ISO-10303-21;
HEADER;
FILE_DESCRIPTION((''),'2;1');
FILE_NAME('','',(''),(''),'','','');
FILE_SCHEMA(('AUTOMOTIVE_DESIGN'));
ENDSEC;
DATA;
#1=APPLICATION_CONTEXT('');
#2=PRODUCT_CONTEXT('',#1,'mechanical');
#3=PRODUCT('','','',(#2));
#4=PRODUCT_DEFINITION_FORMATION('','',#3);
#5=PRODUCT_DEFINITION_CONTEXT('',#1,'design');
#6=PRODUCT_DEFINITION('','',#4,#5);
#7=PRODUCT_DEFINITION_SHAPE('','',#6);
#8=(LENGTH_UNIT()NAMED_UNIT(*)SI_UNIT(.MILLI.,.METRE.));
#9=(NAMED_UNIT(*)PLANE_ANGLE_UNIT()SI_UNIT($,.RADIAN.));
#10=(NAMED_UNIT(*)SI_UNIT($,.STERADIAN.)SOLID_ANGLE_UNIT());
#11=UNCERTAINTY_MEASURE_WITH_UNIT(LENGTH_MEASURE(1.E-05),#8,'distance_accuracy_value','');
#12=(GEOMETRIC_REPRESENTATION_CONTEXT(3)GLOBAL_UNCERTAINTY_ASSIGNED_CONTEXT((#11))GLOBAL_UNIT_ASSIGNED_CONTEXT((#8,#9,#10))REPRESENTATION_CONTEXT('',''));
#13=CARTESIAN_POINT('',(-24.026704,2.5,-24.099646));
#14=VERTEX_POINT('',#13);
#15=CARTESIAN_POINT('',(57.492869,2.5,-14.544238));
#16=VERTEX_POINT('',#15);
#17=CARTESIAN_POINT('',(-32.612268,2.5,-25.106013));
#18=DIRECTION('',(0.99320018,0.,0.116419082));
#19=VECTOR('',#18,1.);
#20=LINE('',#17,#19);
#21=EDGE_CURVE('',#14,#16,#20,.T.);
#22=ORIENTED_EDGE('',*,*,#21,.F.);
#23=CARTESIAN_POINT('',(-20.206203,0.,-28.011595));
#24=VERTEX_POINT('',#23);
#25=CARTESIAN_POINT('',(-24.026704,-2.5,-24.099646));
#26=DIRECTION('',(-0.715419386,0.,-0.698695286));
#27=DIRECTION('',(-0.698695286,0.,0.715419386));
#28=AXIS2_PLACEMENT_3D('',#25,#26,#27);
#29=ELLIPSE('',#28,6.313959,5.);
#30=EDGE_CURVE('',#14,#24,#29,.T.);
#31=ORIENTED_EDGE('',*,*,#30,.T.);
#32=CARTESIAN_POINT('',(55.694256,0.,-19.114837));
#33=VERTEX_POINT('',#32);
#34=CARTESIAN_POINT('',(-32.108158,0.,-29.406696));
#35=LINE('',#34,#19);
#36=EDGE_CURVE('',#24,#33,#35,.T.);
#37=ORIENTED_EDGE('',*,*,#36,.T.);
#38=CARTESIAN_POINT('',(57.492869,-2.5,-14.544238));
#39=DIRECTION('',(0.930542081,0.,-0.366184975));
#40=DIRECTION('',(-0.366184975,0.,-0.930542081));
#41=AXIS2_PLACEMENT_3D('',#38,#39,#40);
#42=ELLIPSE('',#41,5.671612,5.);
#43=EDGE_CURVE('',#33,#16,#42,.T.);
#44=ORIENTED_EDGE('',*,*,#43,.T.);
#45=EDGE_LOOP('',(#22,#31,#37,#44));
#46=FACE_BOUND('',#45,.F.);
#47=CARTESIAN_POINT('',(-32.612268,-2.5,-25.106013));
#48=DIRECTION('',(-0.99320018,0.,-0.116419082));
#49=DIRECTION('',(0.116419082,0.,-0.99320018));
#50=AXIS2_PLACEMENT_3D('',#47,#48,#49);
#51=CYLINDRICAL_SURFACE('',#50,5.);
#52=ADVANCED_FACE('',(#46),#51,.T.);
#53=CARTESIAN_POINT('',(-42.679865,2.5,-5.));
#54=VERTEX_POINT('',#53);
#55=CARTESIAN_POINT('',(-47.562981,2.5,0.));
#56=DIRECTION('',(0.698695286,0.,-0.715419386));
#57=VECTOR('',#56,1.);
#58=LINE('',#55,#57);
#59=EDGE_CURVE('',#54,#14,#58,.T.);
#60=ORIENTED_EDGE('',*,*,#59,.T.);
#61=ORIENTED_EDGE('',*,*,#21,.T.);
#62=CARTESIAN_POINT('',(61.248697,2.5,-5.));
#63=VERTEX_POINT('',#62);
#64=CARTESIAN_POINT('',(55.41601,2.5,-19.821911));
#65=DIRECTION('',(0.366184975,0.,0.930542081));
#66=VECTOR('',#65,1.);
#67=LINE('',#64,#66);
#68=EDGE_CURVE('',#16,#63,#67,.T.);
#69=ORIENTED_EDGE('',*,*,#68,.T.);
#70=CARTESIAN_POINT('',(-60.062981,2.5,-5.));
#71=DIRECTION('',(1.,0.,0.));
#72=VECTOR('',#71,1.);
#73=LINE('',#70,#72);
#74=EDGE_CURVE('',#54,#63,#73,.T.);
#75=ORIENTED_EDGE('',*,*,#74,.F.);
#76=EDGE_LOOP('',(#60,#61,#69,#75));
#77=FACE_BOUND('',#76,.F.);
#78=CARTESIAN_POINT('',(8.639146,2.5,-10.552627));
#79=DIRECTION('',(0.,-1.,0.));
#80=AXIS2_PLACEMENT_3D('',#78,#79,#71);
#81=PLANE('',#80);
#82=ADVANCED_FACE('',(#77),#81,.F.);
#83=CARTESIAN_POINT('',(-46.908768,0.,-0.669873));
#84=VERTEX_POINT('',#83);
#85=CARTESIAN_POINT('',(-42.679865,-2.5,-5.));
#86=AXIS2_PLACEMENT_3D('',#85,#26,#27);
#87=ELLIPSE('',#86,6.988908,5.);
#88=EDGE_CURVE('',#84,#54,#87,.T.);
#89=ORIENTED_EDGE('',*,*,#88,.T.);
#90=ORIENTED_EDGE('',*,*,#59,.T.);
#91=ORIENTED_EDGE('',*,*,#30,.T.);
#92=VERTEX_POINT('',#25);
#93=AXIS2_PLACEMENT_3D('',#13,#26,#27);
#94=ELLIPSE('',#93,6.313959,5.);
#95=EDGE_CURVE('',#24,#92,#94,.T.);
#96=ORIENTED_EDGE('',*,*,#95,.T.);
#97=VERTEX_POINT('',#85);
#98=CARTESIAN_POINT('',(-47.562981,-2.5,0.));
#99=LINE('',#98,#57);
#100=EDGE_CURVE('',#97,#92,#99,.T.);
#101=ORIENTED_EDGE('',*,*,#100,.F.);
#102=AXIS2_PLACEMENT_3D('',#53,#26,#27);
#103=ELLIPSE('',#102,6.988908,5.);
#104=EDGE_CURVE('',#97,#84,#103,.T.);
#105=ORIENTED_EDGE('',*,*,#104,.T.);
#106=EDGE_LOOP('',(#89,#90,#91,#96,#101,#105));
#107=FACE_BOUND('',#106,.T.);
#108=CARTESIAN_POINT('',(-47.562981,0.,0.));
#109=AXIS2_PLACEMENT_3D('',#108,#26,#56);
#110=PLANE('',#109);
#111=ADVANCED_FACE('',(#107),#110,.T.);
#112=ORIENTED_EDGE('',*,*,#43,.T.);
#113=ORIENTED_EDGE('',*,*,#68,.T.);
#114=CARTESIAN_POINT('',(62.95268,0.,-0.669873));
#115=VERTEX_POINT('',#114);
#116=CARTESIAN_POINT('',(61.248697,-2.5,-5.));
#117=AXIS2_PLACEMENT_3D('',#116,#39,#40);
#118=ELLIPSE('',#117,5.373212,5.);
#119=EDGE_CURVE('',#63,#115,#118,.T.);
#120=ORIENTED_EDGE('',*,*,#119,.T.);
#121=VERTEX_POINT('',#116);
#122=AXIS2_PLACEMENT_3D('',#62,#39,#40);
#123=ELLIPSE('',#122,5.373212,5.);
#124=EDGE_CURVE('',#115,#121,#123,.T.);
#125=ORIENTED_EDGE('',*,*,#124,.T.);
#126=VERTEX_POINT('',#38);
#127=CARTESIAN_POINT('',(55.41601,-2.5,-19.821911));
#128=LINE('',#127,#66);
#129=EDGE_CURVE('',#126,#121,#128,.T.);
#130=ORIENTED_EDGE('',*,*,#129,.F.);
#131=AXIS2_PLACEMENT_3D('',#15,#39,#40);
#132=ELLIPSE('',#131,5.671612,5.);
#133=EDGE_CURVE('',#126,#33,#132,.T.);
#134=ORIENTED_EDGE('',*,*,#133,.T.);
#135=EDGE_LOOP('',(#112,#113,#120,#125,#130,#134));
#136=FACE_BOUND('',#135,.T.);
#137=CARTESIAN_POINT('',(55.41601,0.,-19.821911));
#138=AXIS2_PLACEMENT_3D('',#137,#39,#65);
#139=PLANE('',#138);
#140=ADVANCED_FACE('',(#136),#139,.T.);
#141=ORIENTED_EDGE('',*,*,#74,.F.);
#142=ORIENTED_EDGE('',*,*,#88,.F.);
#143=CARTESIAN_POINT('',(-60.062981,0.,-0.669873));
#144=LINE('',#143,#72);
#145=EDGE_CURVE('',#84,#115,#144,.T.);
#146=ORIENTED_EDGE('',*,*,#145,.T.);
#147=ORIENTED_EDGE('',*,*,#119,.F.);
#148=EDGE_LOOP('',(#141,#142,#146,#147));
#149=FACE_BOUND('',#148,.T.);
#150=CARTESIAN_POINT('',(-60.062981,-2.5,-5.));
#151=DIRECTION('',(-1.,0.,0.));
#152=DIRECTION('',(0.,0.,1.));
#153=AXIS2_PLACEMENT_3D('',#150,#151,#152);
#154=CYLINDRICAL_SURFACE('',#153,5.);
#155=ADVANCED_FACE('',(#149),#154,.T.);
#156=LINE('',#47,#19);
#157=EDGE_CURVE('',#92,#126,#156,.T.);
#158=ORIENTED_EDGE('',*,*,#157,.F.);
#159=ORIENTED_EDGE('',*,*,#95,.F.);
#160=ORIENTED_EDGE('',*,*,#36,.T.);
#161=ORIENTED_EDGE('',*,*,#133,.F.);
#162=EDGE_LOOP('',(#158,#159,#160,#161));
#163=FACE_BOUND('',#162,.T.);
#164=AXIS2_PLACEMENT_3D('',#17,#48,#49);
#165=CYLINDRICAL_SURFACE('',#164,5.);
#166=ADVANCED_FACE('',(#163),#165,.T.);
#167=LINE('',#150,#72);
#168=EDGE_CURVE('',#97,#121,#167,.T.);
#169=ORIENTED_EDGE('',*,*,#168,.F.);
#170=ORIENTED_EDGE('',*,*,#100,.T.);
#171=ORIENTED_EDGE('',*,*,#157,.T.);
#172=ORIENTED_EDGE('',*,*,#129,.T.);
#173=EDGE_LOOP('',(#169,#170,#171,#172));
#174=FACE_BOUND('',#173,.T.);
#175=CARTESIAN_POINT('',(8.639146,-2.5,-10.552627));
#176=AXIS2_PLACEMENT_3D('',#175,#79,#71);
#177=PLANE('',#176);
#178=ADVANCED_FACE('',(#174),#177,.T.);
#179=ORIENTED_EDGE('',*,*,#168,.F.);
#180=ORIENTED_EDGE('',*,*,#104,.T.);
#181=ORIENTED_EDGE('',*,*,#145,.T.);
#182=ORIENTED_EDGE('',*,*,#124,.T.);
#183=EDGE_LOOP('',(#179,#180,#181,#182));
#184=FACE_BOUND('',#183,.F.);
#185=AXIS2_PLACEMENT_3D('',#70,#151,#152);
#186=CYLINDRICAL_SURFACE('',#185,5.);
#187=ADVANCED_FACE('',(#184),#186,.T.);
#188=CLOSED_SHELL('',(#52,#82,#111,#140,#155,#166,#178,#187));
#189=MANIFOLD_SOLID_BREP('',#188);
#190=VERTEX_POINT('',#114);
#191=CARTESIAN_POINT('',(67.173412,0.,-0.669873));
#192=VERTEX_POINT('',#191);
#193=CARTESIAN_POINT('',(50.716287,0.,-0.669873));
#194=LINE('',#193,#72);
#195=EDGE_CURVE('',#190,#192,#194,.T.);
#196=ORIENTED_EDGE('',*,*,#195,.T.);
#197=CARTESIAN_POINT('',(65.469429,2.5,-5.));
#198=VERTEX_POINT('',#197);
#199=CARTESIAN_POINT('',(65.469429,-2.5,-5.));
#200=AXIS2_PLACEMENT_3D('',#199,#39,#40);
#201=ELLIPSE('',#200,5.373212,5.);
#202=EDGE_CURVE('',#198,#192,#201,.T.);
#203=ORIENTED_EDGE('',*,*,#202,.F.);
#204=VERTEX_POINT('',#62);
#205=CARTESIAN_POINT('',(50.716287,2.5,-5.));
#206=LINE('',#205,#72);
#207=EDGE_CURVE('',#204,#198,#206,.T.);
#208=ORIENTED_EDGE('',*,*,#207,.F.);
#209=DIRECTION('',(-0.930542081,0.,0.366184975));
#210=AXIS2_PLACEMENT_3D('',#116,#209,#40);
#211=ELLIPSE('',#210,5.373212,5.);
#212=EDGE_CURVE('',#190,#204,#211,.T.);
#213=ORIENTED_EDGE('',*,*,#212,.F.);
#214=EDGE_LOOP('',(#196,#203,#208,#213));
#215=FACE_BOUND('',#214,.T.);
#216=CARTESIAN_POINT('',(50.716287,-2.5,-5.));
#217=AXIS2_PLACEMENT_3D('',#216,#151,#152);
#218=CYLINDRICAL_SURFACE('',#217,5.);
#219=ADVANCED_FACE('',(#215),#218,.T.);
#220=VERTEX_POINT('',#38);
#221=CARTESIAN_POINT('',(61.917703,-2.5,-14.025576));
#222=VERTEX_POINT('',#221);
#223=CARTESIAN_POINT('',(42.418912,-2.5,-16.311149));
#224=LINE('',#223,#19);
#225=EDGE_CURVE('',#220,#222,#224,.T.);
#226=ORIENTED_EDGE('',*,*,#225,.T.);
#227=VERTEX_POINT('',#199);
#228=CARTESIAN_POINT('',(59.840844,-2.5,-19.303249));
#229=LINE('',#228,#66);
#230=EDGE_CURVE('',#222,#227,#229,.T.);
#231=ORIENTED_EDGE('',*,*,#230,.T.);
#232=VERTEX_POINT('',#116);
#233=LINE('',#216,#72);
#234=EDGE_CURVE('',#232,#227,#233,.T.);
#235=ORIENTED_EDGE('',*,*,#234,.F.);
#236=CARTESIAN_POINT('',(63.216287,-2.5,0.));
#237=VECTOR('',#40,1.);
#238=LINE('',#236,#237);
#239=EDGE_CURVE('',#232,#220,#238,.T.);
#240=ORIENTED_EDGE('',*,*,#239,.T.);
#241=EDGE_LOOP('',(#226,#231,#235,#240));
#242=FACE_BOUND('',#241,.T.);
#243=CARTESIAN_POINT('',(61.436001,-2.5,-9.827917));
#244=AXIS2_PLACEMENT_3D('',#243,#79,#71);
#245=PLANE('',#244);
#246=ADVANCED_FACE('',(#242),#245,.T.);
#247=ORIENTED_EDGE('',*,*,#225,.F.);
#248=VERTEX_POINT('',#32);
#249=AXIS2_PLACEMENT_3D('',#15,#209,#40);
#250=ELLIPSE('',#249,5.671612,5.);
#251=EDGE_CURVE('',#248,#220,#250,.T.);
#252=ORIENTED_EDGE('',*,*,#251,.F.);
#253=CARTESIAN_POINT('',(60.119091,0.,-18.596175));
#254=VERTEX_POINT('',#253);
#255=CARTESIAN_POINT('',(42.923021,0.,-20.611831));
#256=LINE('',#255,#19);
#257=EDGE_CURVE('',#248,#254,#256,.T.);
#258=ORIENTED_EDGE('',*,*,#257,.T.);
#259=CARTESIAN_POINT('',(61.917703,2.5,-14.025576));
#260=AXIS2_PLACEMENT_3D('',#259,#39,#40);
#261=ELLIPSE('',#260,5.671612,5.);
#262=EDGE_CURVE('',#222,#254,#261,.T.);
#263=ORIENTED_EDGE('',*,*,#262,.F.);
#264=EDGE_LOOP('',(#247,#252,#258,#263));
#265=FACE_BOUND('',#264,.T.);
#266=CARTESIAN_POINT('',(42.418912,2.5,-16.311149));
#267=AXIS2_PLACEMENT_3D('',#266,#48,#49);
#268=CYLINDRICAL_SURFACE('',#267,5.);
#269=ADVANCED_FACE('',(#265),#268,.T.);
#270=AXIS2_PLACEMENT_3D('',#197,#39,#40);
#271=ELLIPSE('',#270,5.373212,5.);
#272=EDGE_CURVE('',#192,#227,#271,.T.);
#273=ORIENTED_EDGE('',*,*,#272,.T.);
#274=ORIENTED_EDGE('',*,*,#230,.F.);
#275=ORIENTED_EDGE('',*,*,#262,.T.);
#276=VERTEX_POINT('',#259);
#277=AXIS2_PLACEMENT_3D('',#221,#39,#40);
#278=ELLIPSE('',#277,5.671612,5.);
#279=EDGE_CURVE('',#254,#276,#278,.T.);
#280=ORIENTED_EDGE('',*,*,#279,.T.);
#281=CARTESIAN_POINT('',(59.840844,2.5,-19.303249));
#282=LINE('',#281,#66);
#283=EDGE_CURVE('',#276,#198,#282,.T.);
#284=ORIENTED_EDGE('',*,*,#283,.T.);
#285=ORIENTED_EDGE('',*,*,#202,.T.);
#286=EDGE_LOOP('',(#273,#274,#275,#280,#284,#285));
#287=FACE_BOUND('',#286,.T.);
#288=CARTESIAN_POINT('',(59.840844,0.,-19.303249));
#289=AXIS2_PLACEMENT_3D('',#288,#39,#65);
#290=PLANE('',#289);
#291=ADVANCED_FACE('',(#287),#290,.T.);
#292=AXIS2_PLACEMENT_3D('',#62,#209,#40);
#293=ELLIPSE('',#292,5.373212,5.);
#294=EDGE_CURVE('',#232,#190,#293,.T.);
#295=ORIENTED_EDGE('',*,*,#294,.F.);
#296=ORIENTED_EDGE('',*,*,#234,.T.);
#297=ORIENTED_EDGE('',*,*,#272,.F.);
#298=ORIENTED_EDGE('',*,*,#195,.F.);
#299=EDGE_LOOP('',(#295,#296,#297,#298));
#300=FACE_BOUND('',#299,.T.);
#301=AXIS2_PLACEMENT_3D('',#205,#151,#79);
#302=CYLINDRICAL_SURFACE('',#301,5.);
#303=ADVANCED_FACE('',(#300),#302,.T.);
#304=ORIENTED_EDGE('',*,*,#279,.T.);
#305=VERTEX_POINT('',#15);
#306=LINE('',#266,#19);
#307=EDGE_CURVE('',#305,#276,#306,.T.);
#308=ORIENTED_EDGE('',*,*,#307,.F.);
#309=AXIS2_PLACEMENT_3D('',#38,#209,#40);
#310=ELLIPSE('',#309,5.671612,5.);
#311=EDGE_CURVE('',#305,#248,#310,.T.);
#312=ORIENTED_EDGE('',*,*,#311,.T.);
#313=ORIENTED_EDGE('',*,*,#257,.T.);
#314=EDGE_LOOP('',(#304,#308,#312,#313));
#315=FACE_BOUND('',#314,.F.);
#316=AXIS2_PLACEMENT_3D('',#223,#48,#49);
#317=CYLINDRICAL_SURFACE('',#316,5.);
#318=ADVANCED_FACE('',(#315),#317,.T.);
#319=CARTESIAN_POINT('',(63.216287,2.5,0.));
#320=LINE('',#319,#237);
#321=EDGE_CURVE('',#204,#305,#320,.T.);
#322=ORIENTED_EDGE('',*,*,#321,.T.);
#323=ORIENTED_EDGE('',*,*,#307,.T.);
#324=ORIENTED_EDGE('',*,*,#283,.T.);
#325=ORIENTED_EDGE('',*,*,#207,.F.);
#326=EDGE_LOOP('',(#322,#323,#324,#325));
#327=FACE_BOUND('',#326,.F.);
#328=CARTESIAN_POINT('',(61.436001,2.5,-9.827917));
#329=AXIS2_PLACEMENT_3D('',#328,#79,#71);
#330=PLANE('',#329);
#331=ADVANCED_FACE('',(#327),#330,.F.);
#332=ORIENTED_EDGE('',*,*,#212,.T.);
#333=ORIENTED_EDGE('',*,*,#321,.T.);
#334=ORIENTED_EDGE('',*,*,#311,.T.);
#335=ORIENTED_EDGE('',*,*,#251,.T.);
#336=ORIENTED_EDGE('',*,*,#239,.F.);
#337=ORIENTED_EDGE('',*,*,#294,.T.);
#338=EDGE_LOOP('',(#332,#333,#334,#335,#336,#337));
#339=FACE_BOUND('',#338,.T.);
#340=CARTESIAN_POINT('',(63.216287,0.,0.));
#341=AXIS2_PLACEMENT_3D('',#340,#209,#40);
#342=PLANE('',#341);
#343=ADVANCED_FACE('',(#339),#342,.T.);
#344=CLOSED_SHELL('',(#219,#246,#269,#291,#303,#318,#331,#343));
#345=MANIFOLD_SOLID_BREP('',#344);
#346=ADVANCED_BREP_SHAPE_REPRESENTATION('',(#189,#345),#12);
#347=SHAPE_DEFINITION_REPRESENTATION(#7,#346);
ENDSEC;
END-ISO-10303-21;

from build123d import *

# Parameters (mm, degrees)
F1_DEPTH    = 2.5
F2_T1_DEPTH = 135.7792679391
F2_T3_DEPTH = 100.5448710702
F3_DEPTH    = 2.5
F4_T1_DEPTH = 29.2207320609
F4_T3_DEPTH = 29.4551289298


# Not quite as in the source:
# - a fillet or chamfer that OpenCascade refuses, or shapes differently, is made with other operations: its cross-section is extruded or revolved along the edge and cut away or added


with BuildPart() as f1:
    # F0 (on Front) → F1 (new body, symmetric)
    with BuildSketch(Plane.XZ):
        Polygon((63.2162865844, 0), (-47.5629813547, 0), (-19.6151699151, -28.6167754252), (55.4160096247, -19.8219109079), align=None)
    extrude(amount=F1_DEPTH, both=True)

    # F2: fillet of radius 5 on 4 edges, made by hand

    # F2_s2 → F2_t1 (cut)
    with BuildSketch(Plane.YZ.offset(-60.0629813547)):
        with BuildLine():
            ThreePointArc((2.5, 0), (-1.0355339059, -1.4644660941), (-2.5, -5))
            Line((-2.5, -5), (-2.5, 0))
            Line((-2.5, 0), (2.5, 0))
        make_face()
        with BuildLine():
            ThreePointArc((-2.5, 0), (1.0355339059, -1.4644660941), (2.5, -5))
            Line((2.5, -5), (2.5, 0))
            Line((2.5, 0), (-2.5, 0))
        make_face()
    extrude(amount=F2_T1_DEPTH, mode=Mode.SUBTRACT)

    # F2_s4 → F2_t3 (cut)
    with BuildSketch(Plane(origin=(-35.073204722, 0, -4.1111453346), x_dir=(0, 1, 0), z_dir=(0.9932001799, 0, 0.1164190817))):
        with BuildLine():
            ThreePointArc((2.5, -26.1386064324), (-1.0355339059, -24.6741403384), (-2.5, -21.1386064324))
            Line((-2.5, -21.1386064324), (-2.5, -26.1386064324))
            Line((-2.5, -26.1386064324), (2.5, -26.1386064324))
        make_face()
        with BuildLine():
            ThreePointArc((-2.5, -26.1386064324), (1.0355339059, -24.6741403384), (2.5, -21.1386064324))
            Line((2.5, -21.1386064324), (2.5, -26.1386064324))
            Line((2.5, -26.1386064324), (-2.5, -26.1386064324))
        make_face()
    extrude(amount=F2_T3_DEPTH, mode=Mode.SUBTRACT)


with BuildPart() as f3:
    # F0 (on Front) → F3 (new body, symmetric)
    with BuildSketch(Plane.XZ):
        Polygon((67.4370186453, 0), (63.2162865844, 0), (55.4160096247, -19.8219109079), (59.8408444794, -19.3032488891), align=None)
    extrude(amount=F3_DEPTH, both=True)

    # F4: fillet of radius 5 on 4 edges, made by hand

    # F4_s2 → F4_t1 (cut)
    with BuildSketch(Plane.YZ.offset(50.7162865844)):
        with BuildLine():
            ThreePointArc((-2.5, -5), (-1.0355339059, -1.4644660941), (2.5, 0))
            Line((2.5, 0), (-2.5, 0))
            Line((-2.5, 0), (-2.5, -5))
        make_face()
        with BuildLine():
            ThreePointArc((-2.5, 0), (1.0355339059, -1.4644660941), (2.5, -5))
            Line((2.5, -5), (2.5, 0))
            Line((2.5, 0), (-2.5, 0))
        make_face()
    extrude(amount=F4_T1_DEPTH, mode=Mode.SUBTRACT)

    # F4_s4 → F4_t3 (cut)
    with BuildSketch(Plane(origin=(39.9579748177, 0, 4.6837191826), x_dir=(0, 1, 0), z_dir=(0.9932001799, 0, 0.1164190817))):
        with BuildLine():
            ThreePointArc((2.5, -26.1386064324), (-1.0355339059, -24.6741403384), (-2.5, -21.1386064324))
            Line((-2.5, -21.1386064324), (-2.5, -26.1386064324))
            Line((-2.5, -26.1386064324), (2.5, -26.1386064324))
        make_face()
        with BuildLine():
            ThreePointArc((-2.5, -26.1386064324), (1.0355339059, -24.6741403384), (2.5, -21.1386064324))
            Line((2.5, -21.1386064324), (2.5, -26.1386064324))
            Line((2.5, -26.1386064324), (-2.5, -26.1386064324))
        make_face()
    extrude(amount=F4_T3_DEPTH, mode=Mode.SUBTRACT)


solid = Compound([f1.part, f3.part])
